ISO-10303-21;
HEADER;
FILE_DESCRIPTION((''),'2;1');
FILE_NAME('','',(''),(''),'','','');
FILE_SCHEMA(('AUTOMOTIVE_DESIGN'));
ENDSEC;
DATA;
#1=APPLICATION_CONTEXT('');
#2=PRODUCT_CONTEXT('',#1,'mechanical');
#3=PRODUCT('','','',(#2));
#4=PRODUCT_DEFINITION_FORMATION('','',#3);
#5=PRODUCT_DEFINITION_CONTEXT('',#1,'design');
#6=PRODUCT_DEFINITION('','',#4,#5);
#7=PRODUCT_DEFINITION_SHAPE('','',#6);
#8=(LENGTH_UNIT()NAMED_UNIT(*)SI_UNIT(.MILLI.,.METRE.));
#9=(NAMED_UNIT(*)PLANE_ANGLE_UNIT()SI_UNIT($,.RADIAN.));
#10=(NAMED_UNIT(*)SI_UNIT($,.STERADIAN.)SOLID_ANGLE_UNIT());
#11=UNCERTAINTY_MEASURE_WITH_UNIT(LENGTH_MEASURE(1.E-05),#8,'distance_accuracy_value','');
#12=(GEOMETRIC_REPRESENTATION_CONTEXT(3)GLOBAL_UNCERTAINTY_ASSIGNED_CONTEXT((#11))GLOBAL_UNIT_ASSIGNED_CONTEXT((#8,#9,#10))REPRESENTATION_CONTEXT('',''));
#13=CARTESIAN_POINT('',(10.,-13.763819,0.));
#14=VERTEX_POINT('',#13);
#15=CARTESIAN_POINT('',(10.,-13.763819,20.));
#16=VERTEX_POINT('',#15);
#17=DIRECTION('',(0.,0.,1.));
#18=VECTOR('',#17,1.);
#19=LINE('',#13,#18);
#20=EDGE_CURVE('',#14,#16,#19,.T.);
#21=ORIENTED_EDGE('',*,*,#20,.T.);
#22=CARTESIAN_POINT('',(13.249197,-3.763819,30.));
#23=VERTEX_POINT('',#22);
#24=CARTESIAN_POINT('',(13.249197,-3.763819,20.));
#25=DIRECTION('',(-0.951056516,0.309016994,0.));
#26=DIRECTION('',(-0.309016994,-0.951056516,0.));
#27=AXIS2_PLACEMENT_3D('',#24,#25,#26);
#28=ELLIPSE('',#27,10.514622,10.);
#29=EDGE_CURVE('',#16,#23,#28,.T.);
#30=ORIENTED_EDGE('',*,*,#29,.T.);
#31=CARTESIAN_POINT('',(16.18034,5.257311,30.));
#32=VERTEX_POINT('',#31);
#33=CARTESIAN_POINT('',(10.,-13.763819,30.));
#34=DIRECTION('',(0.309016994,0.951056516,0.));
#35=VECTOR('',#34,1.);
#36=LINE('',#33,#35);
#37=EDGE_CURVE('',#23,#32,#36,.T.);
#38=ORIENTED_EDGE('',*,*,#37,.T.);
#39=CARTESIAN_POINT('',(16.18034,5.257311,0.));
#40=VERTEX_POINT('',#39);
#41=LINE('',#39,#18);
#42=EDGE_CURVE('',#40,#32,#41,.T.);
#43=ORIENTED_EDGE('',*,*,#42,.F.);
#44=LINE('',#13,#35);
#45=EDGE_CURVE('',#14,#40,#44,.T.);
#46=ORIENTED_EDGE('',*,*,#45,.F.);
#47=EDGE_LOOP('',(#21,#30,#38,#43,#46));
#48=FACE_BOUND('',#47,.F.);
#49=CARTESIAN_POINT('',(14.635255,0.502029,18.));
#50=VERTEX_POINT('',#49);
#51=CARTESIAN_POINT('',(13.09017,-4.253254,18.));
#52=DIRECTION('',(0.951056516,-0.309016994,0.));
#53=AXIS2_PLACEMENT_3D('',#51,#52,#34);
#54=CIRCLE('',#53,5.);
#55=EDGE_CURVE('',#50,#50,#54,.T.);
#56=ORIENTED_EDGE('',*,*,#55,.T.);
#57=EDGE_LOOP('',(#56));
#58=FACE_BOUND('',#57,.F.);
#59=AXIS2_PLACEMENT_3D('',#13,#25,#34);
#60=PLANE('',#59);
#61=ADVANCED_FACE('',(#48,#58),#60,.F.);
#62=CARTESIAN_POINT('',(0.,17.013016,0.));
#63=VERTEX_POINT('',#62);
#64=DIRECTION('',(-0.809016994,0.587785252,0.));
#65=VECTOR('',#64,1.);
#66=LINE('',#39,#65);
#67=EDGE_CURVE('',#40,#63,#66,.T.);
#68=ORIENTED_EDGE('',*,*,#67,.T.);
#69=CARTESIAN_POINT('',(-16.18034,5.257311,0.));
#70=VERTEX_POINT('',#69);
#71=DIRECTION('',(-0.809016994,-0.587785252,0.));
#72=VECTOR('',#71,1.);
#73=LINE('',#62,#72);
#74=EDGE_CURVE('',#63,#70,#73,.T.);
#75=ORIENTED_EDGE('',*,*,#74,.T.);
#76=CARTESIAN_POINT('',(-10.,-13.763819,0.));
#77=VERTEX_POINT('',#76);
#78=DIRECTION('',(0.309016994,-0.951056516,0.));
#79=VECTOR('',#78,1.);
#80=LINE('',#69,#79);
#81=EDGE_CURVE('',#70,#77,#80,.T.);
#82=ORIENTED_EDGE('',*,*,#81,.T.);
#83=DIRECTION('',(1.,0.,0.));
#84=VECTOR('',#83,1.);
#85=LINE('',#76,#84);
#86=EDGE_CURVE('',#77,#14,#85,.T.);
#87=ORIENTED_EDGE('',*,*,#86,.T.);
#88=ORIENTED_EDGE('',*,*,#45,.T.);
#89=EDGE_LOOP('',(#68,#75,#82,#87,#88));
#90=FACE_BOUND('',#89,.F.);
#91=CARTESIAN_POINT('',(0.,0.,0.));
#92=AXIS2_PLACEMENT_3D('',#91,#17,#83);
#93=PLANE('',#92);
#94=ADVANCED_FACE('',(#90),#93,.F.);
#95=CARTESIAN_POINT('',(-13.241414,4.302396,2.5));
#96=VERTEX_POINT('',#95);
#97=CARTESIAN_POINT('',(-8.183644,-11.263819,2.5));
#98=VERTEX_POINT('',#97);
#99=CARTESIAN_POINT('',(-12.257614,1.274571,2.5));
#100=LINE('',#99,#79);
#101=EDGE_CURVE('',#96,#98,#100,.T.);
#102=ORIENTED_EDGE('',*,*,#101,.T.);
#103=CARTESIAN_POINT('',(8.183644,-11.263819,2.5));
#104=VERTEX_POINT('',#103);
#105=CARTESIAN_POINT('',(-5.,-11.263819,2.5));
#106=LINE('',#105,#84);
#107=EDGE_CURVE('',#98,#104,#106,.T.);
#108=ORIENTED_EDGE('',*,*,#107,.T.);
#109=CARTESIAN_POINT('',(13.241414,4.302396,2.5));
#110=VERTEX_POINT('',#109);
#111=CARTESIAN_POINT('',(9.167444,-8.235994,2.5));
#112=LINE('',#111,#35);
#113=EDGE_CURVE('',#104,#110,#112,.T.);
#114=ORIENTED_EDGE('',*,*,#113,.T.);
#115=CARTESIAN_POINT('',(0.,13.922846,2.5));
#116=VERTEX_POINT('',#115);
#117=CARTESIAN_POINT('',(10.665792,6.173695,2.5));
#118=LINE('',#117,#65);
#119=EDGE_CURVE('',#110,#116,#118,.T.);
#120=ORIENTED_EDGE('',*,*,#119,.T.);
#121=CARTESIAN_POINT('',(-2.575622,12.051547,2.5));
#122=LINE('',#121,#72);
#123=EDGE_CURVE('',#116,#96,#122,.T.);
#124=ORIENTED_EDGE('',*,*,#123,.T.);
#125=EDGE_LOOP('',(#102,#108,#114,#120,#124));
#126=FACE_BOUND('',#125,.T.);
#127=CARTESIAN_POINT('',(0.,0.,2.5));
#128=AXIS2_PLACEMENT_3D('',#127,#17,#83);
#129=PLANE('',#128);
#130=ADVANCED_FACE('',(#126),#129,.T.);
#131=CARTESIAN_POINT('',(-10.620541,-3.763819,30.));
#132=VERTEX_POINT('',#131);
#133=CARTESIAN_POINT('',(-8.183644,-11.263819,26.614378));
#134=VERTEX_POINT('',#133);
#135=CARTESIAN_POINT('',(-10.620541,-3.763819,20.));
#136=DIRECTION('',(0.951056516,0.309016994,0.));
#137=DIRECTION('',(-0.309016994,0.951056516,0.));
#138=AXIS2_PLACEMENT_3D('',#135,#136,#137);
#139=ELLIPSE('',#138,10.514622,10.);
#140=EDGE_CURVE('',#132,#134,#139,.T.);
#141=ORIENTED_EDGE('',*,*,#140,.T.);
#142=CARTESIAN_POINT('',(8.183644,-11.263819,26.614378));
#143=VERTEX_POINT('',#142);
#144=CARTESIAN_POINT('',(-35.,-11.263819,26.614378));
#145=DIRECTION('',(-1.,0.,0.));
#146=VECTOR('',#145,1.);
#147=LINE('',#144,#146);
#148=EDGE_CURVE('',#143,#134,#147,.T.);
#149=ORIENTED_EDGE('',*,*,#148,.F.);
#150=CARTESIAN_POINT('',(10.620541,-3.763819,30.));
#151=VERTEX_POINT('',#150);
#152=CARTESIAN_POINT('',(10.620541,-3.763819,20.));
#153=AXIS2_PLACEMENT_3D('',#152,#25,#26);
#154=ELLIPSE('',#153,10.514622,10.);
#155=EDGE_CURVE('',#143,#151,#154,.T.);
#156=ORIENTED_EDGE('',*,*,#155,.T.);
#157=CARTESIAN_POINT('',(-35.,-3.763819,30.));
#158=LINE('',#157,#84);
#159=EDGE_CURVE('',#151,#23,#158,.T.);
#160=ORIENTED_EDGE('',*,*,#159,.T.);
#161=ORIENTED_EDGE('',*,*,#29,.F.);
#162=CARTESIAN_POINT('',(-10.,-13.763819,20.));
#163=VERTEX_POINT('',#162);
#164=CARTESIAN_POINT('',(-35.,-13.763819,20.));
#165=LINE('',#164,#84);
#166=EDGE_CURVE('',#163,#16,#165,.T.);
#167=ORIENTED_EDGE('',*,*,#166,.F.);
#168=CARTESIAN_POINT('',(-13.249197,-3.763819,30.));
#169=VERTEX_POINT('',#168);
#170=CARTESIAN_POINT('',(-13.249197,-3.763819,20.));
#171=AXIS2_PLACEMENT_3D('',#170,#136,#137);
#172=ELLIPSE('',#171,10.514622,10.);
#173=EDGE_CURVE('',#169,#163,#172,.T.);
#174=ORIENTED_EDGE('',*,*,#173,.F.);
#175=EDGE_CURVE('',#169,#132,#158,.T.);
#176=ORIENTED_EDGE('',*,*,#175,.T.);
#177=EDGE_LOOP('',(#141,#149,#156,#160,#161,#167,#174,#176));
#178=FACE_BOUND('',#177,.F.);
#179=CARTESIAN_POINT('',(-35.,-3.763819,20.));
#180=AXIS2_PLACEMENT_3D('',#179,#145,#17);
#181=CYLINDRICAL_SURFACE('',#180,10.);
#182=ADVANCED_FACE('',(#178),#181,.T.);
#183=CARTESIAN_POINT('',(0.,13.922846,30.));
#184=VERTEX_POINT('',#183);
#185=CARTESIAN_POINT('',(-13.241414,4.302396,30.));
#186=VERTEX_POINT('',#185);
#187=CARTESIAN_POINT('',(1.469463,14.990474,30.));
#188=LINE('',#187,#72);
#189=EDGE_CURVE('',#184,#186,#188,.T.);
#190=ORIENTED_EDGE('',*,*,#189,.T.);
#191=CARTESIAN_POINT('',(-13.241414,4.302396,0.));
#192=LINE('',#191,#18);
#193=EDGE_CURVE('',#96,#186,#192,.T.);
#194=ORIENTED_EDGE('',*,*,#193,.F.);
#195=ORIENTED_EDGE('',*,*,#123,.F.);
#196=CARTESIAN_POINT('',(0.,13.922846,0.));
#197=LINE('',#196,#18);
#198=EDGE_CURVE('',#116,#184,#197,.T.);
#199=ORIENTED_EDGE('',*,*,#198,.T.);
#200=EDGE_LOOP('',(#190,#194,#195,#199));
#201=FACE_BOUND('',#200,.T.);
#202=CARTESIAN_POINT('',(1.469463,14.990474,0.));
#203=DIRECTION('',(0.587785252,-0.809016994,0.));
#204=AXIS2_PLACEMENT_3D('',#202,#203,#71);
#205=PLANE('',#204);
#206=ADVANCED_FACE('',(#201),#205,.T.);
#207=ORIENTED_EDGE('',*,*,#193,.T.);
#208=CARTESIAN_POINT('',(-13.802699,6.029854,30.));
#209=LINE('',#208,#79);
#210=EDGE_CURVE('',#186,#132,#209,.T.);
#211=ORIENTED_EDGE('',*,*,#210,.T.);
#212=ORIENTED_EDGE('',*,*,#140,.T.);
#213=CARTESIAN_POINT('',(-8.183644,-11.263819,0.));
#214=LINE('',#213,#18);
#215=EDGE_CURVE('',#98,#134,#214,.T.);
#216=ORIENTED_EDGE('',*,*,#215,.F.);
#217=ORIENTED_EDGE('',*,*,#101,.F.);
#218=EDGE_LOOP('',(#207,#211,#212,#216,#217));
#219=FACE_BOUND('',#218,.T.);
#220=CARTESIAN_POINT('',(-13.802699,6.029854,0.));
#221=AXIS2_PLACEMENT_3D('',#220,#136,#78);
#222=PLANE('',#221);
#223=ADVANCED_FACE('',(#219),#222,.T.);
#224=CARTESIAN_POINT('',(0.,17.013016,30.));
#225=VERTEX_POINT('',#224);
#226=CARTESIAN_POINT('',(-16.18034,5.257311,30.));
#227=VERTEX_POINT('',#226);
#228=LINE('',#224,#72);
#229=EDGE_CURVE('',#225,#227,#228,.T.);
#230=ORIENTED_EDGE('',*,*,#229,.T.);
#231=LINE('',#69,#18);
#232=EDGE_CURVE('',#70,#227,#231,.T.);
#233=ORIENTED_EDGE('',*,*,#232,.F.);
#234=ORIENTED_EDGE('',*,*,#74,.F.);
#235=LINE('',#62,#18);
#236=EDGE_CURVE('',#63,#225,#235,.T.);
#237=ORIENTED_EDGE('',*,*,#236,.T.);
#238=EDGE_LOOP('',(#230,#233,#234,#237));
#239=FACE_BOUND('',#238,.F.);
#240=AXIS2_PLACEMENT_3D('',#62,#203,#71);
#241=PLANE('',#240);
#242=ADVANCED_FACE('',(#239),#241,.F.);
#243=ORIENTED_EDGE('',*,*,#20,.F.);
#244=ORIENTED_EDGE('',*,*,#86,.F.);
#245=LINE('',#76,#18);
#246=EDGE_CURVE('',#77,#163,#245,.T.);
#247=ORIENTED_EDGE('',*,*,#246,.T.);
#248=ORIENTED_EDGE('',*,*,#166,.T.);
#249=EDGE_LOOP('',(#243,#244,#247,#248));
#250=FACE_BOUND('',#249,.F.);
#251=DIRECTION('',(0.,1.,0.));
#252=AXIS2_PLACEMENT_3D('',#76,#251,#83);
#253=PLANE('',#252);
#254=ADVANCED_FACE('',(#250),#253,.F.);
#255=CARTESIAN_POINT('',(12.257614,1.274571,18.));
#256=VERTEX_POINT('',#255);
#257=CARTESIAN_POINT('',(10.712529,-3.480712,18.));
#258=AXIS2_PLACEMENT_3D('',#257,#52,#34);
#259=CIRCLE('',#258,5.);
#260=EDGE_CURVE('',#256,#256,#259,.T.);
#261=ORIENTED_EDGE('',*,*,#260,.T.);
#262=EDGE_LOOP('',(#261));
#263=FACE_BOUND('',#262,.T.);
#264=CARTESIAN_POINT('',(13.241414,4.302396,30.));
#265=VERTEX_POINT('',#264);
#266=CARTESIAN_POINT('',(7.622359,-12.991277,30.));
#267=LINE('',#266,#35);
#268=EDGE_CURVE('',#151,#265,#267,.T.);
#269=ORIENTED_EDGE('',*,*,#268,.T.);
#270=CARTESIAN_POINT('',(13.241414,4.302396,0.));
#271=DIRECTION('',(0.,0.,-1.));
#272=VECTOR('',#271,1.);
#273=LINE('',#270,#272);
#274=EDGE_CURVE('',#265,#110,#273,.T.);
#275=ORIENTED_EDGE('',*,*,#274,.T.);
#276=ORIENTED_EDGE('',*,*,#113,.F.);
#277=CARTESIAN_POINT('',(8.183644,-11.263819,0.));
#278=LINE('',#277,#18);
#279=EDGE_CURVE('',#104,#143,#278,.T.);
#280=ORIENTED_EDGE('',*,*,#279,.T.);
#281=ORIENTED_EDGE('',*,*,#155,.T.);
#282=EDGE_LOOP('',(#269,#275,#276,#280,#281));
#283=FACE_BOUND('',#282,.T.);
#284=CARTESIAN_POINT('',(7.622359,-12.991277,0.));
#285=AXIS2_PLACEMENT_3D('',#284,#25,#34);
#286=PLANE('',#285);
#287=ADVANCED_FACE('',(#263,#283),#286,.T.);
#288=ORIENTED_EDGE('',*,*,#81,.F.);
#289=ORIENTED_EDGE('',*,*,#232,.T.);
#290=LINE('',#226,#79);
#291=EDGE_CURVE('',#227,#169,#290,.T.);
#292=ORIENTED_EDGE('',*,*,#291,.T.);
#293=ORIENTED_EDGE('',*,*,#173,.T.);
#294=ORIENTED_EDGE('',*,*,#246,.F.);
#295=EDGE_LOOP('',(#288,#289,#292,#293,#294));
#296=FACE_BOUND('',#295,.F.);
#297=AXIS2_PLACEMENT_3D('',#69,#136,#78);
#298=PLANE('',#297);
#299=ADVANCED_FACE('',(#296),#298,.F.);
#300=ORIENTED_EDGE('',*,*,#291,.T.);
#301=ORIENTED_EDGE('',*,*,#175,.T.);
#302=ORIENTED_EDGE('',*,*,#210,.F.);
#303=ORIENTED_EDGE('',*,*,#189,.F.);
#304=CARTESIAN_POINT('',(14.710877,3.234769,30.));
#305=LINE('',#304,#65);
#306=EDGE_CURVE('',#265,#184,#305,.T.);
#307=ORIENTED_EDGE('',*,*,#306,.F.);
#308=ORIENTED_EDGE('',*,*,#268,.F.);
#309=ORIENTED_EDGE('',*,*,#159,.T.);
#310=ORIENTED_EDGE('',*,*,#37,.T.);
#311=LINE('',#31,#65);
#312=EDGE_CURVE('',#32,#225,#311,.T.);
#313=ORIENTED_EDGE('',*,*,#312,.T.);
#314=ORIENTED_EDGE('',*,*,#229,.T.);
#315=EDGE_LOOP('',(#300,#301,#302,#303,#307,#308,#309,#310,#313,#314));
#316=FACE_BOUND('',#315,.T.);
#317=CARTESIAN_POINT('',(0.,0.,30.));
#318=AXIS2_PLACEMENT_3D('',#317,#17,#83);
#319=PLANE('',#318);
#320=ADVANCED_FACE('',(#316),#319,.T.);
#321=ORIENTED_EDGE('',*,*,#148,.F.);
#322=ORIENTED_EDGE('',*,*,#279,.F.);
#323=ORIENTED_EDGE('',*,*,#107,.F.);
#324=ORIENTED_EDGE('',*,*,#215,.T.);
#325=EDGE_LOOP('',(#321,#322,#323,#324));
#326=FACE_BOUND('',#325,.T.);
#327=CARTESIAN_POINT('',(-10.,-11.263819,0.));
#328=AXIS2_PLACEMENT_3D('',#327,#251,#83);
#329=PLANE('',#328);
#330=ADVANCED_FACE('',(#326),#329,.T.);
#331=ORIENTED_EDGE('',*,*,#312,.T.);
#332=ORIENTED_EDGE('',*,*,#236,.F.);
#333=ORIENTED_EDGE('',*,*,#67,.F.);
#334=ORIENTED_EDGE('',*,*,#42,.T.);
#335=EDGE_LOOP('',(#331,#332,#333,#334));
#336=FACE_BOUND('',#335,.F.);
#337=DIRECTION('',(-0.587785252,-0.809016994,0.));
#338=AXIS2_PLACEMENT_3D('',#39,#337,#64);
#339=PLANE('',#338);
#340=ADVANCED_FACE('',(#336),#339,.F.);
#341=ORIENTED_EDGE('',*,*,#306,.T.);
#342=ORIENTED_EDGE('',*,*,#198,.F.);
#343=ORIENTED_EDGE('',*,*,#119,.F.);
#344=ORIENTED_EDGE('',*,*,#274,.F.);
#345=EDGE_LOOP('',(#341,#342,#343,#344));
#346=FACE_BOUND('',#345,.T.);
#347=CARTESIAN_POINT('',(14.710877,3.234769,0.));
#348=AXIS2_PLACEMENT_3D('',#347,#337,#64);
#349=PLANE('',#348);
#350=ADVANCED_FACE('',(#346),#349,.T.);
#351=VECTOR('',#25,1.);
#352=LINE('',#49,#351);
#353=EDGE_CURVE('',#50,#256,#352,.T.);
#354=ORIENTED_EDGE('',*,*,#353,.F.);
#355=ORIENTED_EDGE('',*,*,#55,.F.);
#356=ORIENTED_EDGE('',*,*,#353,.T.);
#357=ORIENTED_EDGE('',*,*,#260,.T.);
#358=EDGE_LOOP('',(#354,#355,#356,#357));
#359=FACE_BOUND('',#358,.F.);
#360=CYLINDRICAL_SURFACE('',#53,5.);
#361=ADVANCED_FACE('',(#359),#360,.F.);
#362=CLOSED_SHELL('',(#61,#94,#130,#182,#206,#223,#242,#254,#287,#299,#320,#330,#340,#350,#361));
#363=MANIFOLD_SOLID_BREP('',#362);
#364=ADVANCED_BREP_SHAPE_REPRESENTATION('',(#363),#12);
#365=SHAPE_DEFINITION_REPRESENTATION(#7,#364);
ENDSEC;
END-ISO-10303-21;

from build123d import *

# Parameters (mm, degrees)
F1_DEPTH    = 30
F2_T        = -2.5
F3_R        = 5
F4_DEPTH    = 12.6
F5_T1_DEPTH = 70


# Not quite as in the source:
# - a fillet or chamfer that OpenCascade refuses, or shapes differently, is made with other operations: its cross-section is extruded or revolved along the edge and cut away or added


with BuildPart() as f1:
    # F0 (on Top) → F1 (new body)
    with BuildSketch(Plane.XY):
        Polygon((16.1803398875, 5.2573111212), (0, 17.013016167), (-16.1803398875, 5.2573111212), (-10, -13.7638192047), (10, -13.7638192047), align=None)
    extrude(amount=F1_DEPTH)

    # F2
    f2_openings = [f1.faces().sort_by_distance(p)[0] for p in [
        (0, 0, 30),
    ]]
    offset(amount=F2_T, openings=f2_openings)

    # F3 (on face) → F4 (cut)
    with BuildSketch(Plane(origin=(13.0901699437, -4.2532540418, 0), x_dir=(0.3090169944, 0.9510565163, 0), z_dir=(0.9510565163, -0.3090169944, 0))):
        with Locations((0, 18)):
            Circle(F3_R)
    extrude(amount=-F4_DEPTH, mode=Mode.SUBTRACT)

    # F5: fillet of radius 10 on 1 edges, made by hand

    # F5_s2 → F5_t1 (cut)
    with BuildSketch(Plane.YZ.offset(-35)):
        with BuildLine():
            ThreePointArc((-3.7638192047, 30), (-10.8348870166, 27.0710678119), (-13.7638192047, 20))
            Line((-13.7638192047, 20), (-13.7638192047, 30))
            Line((-13.7638192047, 30), (-3.7638192047, 30))
        make_face()
    extrude(amount=F5_T1_DEPTH, mode=Mode.SUBTRACT)


solid = f1.part
